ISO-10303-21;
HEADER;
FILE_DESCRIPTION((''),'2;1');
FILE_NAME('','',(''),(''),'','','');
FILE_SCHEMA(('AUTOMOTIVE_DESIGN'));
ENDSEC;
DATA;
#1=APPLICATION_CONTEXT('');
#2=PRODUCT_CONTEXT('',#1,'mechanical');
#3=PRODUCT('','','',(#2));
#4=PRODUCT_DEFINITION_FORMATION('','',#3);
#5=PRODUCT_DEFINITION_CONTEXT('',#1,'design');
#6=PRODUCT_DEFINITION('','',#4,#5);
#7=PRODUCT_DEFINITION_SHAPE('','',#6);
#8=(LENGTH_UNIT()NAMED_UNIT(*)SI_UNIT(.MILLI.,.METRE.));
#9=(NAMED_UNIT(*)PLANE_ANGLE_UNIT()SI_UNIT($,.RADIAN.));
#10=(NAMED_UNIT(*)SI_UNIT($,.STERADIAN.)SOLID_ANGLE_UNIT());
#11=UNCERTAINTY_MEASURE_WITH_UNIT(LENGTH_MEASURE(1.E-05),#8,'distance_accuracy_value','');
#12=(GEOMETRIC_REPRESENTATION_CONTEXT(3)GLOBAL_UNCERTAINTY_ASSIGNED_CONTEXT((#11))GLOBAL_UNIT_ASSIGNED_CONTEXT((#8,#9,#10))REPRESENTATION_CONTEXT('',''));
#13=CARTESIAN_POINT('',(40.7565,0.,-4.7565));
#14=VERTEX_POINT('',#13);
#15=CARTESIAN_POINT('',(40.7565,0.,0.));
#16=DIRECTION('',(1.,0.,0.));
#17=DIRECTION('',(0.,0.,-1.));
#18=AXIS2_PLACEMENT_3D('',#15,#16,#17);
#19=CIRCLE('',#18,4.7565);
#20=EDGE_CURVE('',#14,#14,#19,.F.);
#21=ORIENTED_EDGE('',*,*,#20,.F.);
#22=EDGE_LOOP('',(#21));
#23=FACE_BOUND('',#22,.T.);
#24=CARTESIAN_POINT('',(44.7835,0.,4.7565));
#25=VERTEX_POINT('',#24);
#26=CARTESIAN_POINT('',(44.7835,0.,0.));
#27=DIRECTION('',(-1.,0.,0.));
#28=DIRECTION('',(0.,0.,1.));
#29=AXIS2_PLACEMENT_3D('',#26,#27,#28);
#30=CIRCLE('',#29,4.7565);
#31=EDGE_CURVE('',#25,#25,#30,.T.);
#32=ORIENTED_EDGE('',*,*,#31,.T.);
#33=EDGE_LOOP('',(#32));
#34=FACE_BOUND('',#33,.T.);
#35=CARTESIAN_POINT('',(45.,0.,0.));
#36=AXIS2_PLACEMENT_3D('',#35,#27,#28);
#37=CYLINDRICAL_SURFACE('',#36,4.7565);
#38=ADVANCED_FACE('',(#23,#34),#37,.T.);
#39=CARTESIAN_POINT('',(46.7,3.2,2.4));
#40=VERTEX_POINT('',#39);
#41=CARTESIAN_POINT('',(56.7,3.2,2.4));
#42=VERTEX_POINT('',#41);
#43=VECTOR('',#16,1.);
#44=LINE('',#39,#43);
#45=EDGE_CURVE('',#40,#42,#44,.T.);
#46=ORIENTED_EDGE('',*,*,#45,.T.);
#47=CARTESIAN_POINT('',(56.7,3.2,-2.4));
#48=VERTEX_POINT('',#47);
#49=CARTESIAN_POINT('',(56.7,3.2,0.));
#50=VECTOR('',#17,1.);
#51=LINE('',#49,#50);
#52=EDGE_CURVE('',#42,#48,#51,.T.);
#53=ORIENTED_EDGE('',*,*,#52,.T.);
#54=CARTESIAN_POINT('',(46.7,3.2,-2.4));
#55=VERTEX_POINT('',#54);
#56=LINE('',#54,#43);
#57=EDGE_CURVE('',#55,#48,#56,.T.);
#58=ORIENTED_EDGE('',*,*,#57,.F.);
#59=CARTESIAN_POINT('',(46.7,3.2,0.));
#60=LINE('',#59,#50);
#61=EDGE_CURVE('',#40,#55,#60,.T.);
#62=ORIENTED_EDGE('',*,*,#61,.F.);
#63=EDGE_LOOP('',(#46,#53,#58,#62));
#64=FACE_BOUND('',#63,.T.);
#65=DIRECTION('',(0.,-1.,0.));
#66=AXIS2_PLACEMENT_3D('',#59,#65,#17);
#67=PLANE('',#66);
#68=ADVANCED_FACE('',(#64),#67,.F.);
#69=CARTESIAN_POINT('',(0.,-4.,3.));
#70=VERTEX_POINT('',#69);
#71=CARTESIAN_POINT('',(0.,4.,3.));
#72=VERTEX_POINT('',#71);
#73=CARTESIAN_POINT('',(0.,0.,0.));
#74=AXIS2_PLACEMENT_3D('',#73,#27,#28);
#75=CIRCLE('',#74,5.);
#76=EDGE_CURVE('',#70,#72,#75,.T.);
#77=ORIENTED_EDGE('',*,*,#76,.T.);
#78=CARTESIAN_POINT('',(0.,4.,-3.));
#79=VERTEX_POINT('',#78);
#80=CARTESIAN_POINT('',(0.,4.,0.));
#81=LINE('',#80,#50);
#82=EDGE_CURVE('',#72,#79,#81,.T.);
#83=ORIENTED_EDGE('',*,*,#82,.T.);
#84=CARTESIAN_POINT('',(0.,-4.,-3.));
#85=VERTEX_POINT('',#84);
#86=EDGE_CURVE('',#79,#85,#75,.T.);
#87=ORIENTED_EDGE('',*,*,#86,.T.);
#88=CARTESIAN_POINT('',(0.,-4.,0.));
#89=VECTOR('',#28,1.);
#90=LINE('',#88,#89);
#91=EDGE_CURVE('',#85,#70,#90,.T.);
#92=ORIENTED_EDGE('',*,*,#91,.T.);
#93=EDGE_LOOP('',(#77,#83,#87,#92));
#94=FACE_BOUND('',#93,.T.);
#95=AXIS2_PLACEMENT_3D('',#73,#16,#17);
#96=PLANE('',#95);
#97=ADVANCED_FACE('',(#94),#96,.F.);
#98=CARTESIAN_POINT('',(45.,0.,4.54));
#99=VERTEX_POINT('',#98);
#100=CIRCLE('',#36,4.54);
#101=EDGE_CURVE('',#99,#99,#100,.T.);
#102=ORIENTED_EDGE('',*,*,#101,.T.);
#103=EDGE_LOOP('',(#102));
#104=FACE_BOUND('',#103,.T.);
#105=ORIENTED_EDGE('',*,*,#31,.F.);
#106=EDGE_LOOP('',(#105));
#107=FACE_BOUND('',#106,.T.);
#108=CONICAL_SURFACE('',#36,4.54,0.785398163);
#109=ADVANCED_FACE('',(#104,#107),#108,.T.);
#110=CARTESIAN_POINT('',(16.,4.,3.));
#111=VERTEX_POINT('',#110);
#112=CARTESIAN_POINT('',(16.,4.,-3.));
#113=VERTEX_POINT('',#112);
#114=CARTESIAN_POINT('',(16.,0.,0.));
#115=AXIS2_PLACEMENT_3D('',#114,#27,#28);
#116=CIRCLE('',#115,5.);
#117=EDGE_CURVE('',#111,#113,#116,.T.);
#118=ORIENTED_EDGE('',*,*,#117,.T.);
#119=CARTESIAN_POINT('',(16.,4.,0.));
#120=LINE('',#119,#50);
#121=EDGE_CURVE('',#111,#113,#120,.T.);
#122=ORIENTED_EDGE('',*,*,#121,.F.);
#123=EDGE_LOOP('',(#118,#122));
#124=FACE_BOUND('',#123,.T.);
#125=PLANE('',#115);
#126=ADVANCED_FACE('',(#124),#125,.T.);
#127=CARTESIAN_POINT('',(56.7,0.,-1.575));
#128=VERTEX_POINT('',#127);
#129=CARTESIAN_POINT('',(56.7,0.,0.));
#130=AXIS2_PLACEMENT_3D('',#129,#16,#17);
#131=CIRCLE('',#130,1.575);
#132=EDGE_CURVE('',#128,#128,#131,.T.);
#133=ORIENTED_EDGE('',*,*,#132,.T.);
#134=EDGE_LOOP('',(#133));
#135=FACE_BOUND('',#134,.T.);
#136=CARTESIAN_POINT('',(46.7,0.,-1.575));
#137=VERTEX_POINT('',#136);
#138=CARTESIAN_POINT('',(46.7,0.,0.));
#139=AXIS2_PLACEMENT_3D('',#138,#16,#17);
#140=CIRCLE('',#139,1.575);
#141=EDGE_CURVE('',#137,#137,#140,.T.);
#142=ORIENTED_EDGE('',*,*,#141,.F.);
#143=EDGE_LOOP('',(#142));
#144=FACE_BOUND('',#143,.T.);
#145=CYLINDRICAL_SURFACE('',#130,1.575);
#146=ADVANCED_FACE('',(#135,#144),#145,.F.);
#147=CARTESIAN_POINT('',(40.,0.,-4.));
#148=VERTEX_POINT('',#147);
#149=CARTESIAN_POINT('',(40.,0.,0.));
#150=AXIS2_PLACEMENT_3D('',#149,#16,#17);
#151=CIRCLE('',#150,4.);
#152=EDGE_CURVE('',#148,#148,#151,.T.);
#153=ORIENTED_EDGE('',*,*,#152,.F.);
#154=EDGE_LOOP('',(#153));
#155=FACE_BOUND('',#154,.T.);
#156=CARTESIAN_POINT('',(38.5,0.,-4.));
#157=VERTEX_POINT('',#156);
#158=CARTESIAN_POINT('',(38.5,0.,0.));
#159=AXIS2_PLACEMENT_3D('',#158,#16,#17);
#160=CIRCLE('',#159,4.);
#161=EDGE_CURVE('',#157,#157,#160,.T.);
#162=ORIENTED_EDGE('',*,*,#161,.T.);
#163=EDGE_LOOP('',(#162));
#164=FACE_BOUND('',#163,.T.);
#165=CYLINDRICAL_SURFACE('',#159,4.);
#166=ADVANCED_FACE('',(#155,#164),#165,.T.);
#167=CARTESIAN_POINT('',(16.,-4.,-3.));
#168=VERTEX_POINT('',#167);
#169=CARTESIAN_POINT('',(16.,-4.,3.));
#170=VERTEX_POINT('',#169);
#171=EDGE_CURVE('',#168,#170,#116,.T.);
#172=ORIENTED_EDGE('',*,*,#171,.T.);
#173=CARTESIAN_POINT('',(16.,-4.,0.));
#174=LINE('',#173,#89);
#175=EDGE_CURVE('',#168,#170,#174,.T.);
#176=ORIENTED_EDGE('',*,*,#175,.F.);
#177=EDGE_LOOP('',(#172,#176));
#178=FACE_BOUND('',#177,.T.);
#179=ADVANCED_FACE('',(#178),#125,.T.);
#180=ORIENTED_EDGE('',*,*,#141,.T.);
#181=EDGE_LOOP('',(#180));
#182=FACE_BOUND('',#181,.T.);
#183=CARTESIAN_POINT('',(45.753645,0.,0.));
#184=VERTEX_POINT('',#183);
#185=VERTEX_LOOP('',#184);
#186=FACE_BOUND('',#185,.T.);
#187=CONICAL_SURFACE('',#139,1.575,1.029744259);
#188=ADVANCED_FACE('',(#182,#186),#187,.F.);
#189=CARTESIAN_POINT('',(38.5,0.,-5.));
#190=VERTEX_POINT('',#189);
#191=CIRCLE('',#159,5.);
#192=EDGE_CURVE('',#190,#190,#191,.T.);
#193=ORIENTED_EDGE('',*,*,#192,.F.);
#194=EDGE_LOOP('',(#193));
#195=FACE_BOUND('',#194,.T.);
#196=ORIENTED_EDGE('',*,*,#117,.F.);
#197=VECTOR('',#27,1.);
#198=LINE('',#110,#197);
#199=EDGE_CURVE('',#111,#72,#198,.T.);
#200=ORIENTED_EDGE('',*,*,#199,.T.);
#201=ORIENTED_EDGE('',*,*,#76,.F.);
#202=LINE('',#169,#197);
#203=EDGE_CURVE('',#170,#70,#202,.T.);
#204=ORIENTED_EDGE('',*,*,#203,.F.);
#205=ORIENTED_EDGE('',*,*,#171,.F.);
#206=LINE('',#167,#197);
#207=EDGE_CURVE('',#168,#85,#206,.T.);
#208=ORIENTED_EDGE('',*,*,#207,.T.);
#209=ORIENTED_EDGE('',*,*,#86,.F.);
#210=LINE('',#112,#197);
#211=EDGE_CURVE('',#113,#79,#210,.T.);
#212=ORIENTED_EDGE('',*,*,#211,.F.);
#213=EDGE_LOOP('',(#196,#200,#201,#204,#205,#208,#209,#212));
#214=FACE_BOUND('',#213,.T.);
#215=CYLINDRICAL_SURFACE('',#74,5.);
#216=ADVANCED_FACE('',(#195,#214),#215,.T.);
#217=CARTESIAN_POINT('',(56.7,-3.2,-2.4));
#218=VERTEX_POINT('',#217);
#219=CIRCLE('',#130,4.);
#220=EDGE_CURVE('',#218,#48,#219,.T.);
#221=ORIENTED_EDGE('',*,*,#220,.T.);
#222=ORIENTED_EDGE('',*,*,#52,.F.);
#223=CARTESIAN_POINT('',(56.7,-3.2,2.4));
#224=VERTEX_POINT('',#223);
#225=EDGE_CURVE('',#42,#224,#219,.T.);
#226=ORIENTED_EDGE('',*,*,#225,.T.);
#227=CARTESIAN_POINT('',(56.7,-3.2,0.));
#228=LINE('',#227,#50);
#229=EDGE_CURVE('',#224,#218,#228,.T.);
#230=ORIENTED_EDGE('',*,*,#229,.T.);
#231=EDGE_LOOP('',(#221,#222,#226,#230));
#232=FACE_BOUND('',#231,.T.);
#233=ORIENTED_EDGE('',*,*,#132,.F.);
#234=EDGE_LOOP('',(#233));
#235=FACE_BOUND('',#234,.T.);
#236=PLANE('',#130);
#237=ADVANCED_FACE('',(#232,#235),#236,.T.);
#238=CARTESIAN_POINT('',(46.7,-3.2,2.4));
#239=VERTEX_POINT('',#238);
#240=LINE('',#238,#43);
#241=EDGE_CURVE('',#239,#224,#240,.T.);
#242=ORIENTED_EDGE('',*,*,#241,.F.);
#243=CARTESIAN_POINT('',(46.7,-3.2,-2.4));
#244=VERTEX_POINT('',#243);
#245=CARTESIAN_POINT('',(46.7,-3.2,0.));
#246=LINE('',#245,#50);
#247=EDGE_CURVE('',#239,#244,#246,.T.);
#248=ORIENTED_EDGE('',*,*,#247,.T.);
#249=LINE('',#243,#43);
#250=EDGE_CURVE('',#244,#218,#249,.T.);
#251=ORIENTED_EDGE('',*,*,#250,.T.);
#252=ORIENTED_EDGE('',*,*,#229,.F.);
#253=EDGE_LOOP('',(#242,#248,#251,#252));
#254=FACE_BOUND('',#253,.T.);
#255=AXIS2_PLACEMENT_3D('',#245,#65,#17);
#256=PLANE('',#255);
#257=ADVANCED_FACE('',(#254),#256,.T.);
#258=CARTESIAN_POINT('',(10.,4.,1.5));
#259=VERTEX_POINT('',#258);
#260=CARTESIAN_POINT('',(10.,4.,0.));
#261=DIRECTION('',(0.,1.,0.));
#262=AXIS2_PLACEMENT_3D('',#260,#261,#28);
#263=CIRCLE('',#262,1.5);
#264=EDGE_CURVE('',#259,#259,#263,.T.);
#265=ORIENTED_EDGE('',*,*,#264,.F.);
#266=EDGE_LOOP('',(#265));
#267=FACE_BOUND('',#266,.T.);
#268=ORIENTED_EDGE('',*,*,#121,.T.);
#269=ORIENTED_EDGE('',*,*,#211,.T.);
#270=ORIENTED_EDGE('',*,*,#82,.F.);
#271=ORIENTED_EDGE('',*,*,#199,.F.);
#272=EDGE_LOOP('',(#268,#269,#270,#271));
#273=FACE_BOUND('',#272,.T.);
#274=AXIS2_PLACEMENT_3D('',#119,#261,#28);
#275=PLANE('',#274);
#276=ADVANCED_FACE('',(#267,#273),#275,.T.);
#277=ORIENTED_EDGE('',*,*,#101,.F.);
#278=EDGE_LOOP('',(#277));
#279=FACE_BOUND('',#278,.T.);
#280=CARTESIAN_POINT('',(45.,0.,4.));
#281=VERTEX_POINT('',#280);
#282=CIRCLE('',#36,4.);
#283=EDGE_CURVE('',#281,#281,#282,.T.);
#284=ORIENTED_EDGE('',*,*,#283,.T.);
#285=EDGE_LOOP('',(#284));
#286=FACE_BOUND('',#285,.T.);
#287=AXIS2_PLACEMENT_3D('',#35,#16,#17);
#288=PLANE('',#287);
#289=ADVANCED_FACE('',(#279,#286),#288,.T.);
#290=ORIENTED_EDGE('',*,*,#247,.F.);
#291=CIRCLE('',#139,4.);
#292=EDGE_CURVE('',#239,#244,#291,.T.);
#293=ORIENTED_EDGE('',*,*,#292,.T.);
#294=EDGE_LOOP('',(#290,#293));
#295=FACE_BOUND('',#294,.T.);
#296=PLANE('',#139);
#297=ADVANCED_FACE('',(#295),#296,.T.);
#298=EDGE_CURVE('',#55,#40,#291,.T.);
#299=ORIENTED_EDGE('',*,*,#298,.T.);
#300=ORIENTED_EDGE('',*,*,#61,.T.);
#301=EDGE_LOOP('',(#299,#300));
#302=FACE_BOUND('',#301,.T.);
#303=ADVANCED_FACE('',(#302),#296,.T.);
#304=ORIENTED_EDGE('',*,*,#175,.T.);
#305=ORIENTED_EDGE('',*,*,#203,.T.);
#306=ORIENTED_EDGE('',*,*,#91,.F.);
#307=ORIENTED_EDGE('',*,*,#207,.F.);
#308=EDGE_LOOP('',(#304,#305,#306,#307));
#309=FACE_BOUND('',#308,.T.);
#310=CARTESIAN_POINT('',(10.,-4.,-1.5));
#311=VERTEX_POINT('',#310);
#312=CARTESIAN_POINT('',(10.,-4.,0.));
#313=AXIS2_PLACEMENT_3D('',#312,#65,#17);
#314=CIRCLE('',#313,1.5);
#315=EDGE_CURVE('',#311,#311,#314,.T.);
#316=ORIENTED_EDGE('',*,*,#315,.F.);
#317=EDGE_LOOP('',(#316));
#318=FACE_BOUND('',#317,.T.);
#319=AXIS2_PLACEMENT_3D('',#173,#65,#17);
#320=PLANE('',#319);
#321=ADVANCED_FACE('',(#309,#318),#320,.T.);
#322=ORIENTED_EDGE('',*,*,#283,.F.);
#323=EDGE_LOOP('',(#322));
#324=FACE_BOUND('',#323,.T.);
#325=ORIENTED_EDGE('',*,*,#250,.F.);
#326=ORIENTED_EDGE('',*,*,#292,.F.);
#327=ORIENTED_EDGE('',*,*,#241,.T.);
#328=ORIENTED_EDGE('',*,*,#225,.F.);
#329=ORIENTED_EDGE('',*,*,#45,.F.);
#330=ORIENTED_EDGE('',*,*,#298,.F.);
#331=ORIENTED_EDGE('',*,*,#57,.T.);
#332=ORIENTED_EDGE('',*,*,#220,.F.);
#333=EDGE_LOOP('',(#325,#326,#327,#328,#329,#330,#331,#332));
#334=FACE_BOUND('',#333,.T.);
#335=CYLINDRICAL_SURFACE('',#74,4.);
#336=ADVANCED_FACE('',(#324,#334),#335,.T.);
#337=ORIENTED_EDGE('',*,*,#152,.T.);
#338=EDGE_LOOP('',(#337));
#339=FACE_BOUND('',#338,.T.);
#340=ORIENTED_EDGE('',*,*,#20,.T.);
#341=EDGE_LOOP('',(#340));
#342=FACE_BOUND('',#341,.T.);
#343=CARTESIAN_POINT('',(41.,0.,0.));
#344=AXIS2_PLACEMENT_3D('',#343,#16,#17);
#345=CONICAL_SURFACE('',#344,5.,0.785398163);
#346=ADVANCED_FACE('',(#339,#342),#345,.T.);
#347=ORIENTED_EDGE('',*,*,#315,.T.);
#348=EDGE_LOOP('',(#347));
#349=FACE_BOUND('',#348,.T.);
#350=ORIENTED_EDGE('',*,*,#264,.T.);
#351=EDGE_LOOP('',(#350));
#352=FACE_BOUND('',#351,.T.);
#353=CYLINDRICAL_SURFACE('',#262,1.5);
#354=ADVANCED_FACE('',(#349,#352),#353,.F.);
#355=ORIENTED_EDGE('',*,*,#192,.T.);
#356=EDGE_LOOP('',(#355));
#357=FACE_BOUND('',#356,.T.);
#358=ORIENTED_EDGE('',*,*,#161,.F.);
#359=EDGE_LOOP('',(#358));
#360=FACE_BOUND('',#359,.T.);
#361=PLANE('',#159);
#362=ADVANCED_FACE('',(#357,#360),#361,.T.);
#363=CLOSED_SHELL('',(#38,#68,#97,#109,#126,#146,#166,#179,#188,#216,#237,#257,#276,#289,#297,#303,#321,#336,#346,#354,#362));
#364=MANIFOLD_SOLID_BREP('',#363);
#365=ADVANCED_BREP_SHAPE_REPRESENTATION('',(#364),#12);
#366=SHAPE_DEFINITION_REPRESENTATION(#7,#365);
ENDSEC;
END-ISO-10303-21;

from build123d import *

# Parameters (mm, degrees)
CUT_EXTRUDE1_START               = -16
CUT_EXTRUDE1_DEPTH               = 16
F_3_0MM_DOWEL_HOLE1_D            = 3
CUT_EXTRUDE3_START               = -20
SKETCH17_R                       = 5
SKETCH17_R_2                     = 4
CUT_EXTRUDE3_DEPTH               = 1.5
CHAMFER2_SIZE                    = 1
SKETCH18_R                       = 4
CUT_EXTRUDE4_DEPTH               = 3.3
TAP_DRILL_FOR_M3_HELICOIL1_D     = 3.15
TAP_DRILL_FOR_M3_HELICOIL1_DEPTH = 10
TAP_DRILL_FOR_M3_HELICOIL1_TIP   = 0.946355475
CUT_EXTRUDE5_DEPTH               = 10
SKETCH24_R                       = 5
BOSS_EXTRUDE1_DEPTH              = 3
SKETCH26_R                       = 5
SKETCH26_R_2                     = 4.7565
CUT_EXTRUDE6_DEPTH               = 0.5


# Read off the part's stored shape, not the designer's step: M10x0.75 Machine Threads Stud1
with BuildPart() as part:
    # Sketch1 → Revolve1 (revolve)
    with BuildSketch(Plane.XY, mode=Mode.PRIVATE) as revolve1_sk:
        Polygon((0, 0), (0, 5), (45, 5), (45, 4), (60, 4), (60, 0), align=None)
    revolve(revolve1_sk.sketch.rotate(Axis((0, 0, 0), (1, 0, 0)), 90), axis=Axis((0, 0, 0), (1, 0, 0)))

    # Sketch2 → Cut-Extrude1 (cut)
    with BuildSketch(Plane.ZY.offset(CUT_EXTRUDE1_START)):
        with BuildLine():
            Line((-3, 4), (3, 4))
            ThreePointArc((3, 4), (0, 5), (-3, 4))
        make_face()
        with BuildLine():
            Line((3, -4), (-3, -4))
            ThreePointArc((-3, -4), (0, -5), (3, -4))
        make_face()
    extrude(amount=CUT_EXTRUDE1_DEPTH, mode=Mode.SUBTRACT)

    # Ø3.0mm Dowel Hole1 (through all)
    with Locations(Plane(origin=(0, 4, 0), x_dir=(1, 0, 0), z_dir=(0, 1, 0))):
        with Locations((10, 0)):
            Hole(F_3_0MM_DOWEL_HOLE1_D / 2)

    # Sketch17 → Cut-Extrude3 (cut)
    with BuildSketch(Plane(origin=(60, 0, 0), x_dir=(0, 0, -1), z_dir=(1, 0, 0)).offset(CUT_EXTRUDE3_START)):
        with Locations(Location((0, 0, 0), (0, 0, 180))):
            Circle(SKETCH17_R)
        with Locations(Location((0, 0, 0), (0, 0, 180))):
            Circle(SKETCH17_R_2, mode=Mode.SUBTRACT)
    extrude(amount=-CUT_EXTRUDE3_DEPTH, mode=Mode.SUBTRACT)

    # Chamfer2
    chamfer2_edges = [part.edges().sort_by_distance(p)[0] for p in [
        (40, 0, -5),
        (45, 0, -5),
    ]]
    chamfer(chamfer2_edges, length=CHAMFER2_SIZE - 0.0001)  # a hair under: the kernel refuses the full size

    # Sketch18 → Cut-Extrude4 (cut)
    with BuildSketch(Plane(origin=(60, 0, 0), x_dir=(0, 0, -1), z_dir=(1, 0, 0))):
        with Locations(Location((0, 0, 0), (0, 0, 180))):
            Circle(SKETCH18_R)
    extrude(amount=-CUT_EXTRUDE4_DEPTH, mode=Mode.SUBTRACT)

    # Tap Drill for M3 Helicoil1
    with Locations(Plane(origin=(56.7, 0, 0), x_dir=(0, 0, -1), z_dir=(1, 0, 0))):
        with Locations((0, 0)):
            Hole(TAP_DRILL_FOR_M3_HELICOIL1_D / 2, depth=TAP_DRILL_FOR_M3_HELICOIL1_DEPTH)
            with Locations((0, 0, -(TAP_DRILL_FOR_M3_HELICOIL1_DEPTH + TAP_DRILL_FOR_M3_HELICOIL1_TIP / 2))):  # 118° drill point
                Cone(0, TAP_DRILL_FOR_M3_HELICOIL1_D / 2, TAP_DRILL_FOR_M3_HELICOIL1_TIP, mode=Mode.SUBTRACT)

    # Sketch23 → Cut-Extrude5 (cut)
    with BuildSketch(Plane(origin=(56.7, 0, 0), x_dir=(0, 0, -1), z_dir=(1, 0, 0))):
        with BuildLine():
            ThreePointArc((2.4, 3.2), (0, 4), (-2.4, 3.2))
            Line((-2.4, 3.2), (2.4, 3.2))
        make_face()
        with BuildLine():
            Line((2.4, -3.2), (-2.4, -3.2))
            ThreePointArc((-2.4, -3.2), (0, -4), (2.4, -3.2))
        make_face()
    extrude(amount=-CUT_EXTRUDE5_DEPTH, mode=Mode.SUBTRACT)

    # Sketch24 → Boss-Extrude1 (add)
    with BuildSketch(Plane(origin=(45, 0, 0), x_dir=(0, 0, -1), z_dir=(1, 0, 0))):
        Circle(SKETCH24_R)
    extrude(amount=-BOSS_EXTRUDE1_DEPTH)

    # M10x0.75 Machine Threads Stud1 outline → M10x0.75 Machine Threads Stud1 (revolve, cut)
    with BuildSketch(Plane.YX):
        Polygon((5, 45), (4.54, 45), (4.7565, 44.7835), (4.7565, 41), (5, 41), align=None)
    revolve(axis=Axis((0, 0, 0), (1, 0, 0)), mode=Mode.SUBTRACT)

    # Sketch26 → Cut-Extrude6 (cut)
    with BuildSketch(Plane(origin=(41, 0, 0), x_dir=(0, 0, -1), z_dir=(1, 0, 0))):
        with Locations(Location((0, 0, 0), (0, 0, 126.869897646))):
            Circle(SKETCH26_R)
        with Locations(Location((0, 0, 0), (0, 0, 180))):
            Circle(SKETCH26_R_2, mode=Mode.SUBTRACT)
    extrude(amount=-CUT_EXTRUDE6_DEPTH, mode=Mode.SUBTRACT)


solid = part.part
